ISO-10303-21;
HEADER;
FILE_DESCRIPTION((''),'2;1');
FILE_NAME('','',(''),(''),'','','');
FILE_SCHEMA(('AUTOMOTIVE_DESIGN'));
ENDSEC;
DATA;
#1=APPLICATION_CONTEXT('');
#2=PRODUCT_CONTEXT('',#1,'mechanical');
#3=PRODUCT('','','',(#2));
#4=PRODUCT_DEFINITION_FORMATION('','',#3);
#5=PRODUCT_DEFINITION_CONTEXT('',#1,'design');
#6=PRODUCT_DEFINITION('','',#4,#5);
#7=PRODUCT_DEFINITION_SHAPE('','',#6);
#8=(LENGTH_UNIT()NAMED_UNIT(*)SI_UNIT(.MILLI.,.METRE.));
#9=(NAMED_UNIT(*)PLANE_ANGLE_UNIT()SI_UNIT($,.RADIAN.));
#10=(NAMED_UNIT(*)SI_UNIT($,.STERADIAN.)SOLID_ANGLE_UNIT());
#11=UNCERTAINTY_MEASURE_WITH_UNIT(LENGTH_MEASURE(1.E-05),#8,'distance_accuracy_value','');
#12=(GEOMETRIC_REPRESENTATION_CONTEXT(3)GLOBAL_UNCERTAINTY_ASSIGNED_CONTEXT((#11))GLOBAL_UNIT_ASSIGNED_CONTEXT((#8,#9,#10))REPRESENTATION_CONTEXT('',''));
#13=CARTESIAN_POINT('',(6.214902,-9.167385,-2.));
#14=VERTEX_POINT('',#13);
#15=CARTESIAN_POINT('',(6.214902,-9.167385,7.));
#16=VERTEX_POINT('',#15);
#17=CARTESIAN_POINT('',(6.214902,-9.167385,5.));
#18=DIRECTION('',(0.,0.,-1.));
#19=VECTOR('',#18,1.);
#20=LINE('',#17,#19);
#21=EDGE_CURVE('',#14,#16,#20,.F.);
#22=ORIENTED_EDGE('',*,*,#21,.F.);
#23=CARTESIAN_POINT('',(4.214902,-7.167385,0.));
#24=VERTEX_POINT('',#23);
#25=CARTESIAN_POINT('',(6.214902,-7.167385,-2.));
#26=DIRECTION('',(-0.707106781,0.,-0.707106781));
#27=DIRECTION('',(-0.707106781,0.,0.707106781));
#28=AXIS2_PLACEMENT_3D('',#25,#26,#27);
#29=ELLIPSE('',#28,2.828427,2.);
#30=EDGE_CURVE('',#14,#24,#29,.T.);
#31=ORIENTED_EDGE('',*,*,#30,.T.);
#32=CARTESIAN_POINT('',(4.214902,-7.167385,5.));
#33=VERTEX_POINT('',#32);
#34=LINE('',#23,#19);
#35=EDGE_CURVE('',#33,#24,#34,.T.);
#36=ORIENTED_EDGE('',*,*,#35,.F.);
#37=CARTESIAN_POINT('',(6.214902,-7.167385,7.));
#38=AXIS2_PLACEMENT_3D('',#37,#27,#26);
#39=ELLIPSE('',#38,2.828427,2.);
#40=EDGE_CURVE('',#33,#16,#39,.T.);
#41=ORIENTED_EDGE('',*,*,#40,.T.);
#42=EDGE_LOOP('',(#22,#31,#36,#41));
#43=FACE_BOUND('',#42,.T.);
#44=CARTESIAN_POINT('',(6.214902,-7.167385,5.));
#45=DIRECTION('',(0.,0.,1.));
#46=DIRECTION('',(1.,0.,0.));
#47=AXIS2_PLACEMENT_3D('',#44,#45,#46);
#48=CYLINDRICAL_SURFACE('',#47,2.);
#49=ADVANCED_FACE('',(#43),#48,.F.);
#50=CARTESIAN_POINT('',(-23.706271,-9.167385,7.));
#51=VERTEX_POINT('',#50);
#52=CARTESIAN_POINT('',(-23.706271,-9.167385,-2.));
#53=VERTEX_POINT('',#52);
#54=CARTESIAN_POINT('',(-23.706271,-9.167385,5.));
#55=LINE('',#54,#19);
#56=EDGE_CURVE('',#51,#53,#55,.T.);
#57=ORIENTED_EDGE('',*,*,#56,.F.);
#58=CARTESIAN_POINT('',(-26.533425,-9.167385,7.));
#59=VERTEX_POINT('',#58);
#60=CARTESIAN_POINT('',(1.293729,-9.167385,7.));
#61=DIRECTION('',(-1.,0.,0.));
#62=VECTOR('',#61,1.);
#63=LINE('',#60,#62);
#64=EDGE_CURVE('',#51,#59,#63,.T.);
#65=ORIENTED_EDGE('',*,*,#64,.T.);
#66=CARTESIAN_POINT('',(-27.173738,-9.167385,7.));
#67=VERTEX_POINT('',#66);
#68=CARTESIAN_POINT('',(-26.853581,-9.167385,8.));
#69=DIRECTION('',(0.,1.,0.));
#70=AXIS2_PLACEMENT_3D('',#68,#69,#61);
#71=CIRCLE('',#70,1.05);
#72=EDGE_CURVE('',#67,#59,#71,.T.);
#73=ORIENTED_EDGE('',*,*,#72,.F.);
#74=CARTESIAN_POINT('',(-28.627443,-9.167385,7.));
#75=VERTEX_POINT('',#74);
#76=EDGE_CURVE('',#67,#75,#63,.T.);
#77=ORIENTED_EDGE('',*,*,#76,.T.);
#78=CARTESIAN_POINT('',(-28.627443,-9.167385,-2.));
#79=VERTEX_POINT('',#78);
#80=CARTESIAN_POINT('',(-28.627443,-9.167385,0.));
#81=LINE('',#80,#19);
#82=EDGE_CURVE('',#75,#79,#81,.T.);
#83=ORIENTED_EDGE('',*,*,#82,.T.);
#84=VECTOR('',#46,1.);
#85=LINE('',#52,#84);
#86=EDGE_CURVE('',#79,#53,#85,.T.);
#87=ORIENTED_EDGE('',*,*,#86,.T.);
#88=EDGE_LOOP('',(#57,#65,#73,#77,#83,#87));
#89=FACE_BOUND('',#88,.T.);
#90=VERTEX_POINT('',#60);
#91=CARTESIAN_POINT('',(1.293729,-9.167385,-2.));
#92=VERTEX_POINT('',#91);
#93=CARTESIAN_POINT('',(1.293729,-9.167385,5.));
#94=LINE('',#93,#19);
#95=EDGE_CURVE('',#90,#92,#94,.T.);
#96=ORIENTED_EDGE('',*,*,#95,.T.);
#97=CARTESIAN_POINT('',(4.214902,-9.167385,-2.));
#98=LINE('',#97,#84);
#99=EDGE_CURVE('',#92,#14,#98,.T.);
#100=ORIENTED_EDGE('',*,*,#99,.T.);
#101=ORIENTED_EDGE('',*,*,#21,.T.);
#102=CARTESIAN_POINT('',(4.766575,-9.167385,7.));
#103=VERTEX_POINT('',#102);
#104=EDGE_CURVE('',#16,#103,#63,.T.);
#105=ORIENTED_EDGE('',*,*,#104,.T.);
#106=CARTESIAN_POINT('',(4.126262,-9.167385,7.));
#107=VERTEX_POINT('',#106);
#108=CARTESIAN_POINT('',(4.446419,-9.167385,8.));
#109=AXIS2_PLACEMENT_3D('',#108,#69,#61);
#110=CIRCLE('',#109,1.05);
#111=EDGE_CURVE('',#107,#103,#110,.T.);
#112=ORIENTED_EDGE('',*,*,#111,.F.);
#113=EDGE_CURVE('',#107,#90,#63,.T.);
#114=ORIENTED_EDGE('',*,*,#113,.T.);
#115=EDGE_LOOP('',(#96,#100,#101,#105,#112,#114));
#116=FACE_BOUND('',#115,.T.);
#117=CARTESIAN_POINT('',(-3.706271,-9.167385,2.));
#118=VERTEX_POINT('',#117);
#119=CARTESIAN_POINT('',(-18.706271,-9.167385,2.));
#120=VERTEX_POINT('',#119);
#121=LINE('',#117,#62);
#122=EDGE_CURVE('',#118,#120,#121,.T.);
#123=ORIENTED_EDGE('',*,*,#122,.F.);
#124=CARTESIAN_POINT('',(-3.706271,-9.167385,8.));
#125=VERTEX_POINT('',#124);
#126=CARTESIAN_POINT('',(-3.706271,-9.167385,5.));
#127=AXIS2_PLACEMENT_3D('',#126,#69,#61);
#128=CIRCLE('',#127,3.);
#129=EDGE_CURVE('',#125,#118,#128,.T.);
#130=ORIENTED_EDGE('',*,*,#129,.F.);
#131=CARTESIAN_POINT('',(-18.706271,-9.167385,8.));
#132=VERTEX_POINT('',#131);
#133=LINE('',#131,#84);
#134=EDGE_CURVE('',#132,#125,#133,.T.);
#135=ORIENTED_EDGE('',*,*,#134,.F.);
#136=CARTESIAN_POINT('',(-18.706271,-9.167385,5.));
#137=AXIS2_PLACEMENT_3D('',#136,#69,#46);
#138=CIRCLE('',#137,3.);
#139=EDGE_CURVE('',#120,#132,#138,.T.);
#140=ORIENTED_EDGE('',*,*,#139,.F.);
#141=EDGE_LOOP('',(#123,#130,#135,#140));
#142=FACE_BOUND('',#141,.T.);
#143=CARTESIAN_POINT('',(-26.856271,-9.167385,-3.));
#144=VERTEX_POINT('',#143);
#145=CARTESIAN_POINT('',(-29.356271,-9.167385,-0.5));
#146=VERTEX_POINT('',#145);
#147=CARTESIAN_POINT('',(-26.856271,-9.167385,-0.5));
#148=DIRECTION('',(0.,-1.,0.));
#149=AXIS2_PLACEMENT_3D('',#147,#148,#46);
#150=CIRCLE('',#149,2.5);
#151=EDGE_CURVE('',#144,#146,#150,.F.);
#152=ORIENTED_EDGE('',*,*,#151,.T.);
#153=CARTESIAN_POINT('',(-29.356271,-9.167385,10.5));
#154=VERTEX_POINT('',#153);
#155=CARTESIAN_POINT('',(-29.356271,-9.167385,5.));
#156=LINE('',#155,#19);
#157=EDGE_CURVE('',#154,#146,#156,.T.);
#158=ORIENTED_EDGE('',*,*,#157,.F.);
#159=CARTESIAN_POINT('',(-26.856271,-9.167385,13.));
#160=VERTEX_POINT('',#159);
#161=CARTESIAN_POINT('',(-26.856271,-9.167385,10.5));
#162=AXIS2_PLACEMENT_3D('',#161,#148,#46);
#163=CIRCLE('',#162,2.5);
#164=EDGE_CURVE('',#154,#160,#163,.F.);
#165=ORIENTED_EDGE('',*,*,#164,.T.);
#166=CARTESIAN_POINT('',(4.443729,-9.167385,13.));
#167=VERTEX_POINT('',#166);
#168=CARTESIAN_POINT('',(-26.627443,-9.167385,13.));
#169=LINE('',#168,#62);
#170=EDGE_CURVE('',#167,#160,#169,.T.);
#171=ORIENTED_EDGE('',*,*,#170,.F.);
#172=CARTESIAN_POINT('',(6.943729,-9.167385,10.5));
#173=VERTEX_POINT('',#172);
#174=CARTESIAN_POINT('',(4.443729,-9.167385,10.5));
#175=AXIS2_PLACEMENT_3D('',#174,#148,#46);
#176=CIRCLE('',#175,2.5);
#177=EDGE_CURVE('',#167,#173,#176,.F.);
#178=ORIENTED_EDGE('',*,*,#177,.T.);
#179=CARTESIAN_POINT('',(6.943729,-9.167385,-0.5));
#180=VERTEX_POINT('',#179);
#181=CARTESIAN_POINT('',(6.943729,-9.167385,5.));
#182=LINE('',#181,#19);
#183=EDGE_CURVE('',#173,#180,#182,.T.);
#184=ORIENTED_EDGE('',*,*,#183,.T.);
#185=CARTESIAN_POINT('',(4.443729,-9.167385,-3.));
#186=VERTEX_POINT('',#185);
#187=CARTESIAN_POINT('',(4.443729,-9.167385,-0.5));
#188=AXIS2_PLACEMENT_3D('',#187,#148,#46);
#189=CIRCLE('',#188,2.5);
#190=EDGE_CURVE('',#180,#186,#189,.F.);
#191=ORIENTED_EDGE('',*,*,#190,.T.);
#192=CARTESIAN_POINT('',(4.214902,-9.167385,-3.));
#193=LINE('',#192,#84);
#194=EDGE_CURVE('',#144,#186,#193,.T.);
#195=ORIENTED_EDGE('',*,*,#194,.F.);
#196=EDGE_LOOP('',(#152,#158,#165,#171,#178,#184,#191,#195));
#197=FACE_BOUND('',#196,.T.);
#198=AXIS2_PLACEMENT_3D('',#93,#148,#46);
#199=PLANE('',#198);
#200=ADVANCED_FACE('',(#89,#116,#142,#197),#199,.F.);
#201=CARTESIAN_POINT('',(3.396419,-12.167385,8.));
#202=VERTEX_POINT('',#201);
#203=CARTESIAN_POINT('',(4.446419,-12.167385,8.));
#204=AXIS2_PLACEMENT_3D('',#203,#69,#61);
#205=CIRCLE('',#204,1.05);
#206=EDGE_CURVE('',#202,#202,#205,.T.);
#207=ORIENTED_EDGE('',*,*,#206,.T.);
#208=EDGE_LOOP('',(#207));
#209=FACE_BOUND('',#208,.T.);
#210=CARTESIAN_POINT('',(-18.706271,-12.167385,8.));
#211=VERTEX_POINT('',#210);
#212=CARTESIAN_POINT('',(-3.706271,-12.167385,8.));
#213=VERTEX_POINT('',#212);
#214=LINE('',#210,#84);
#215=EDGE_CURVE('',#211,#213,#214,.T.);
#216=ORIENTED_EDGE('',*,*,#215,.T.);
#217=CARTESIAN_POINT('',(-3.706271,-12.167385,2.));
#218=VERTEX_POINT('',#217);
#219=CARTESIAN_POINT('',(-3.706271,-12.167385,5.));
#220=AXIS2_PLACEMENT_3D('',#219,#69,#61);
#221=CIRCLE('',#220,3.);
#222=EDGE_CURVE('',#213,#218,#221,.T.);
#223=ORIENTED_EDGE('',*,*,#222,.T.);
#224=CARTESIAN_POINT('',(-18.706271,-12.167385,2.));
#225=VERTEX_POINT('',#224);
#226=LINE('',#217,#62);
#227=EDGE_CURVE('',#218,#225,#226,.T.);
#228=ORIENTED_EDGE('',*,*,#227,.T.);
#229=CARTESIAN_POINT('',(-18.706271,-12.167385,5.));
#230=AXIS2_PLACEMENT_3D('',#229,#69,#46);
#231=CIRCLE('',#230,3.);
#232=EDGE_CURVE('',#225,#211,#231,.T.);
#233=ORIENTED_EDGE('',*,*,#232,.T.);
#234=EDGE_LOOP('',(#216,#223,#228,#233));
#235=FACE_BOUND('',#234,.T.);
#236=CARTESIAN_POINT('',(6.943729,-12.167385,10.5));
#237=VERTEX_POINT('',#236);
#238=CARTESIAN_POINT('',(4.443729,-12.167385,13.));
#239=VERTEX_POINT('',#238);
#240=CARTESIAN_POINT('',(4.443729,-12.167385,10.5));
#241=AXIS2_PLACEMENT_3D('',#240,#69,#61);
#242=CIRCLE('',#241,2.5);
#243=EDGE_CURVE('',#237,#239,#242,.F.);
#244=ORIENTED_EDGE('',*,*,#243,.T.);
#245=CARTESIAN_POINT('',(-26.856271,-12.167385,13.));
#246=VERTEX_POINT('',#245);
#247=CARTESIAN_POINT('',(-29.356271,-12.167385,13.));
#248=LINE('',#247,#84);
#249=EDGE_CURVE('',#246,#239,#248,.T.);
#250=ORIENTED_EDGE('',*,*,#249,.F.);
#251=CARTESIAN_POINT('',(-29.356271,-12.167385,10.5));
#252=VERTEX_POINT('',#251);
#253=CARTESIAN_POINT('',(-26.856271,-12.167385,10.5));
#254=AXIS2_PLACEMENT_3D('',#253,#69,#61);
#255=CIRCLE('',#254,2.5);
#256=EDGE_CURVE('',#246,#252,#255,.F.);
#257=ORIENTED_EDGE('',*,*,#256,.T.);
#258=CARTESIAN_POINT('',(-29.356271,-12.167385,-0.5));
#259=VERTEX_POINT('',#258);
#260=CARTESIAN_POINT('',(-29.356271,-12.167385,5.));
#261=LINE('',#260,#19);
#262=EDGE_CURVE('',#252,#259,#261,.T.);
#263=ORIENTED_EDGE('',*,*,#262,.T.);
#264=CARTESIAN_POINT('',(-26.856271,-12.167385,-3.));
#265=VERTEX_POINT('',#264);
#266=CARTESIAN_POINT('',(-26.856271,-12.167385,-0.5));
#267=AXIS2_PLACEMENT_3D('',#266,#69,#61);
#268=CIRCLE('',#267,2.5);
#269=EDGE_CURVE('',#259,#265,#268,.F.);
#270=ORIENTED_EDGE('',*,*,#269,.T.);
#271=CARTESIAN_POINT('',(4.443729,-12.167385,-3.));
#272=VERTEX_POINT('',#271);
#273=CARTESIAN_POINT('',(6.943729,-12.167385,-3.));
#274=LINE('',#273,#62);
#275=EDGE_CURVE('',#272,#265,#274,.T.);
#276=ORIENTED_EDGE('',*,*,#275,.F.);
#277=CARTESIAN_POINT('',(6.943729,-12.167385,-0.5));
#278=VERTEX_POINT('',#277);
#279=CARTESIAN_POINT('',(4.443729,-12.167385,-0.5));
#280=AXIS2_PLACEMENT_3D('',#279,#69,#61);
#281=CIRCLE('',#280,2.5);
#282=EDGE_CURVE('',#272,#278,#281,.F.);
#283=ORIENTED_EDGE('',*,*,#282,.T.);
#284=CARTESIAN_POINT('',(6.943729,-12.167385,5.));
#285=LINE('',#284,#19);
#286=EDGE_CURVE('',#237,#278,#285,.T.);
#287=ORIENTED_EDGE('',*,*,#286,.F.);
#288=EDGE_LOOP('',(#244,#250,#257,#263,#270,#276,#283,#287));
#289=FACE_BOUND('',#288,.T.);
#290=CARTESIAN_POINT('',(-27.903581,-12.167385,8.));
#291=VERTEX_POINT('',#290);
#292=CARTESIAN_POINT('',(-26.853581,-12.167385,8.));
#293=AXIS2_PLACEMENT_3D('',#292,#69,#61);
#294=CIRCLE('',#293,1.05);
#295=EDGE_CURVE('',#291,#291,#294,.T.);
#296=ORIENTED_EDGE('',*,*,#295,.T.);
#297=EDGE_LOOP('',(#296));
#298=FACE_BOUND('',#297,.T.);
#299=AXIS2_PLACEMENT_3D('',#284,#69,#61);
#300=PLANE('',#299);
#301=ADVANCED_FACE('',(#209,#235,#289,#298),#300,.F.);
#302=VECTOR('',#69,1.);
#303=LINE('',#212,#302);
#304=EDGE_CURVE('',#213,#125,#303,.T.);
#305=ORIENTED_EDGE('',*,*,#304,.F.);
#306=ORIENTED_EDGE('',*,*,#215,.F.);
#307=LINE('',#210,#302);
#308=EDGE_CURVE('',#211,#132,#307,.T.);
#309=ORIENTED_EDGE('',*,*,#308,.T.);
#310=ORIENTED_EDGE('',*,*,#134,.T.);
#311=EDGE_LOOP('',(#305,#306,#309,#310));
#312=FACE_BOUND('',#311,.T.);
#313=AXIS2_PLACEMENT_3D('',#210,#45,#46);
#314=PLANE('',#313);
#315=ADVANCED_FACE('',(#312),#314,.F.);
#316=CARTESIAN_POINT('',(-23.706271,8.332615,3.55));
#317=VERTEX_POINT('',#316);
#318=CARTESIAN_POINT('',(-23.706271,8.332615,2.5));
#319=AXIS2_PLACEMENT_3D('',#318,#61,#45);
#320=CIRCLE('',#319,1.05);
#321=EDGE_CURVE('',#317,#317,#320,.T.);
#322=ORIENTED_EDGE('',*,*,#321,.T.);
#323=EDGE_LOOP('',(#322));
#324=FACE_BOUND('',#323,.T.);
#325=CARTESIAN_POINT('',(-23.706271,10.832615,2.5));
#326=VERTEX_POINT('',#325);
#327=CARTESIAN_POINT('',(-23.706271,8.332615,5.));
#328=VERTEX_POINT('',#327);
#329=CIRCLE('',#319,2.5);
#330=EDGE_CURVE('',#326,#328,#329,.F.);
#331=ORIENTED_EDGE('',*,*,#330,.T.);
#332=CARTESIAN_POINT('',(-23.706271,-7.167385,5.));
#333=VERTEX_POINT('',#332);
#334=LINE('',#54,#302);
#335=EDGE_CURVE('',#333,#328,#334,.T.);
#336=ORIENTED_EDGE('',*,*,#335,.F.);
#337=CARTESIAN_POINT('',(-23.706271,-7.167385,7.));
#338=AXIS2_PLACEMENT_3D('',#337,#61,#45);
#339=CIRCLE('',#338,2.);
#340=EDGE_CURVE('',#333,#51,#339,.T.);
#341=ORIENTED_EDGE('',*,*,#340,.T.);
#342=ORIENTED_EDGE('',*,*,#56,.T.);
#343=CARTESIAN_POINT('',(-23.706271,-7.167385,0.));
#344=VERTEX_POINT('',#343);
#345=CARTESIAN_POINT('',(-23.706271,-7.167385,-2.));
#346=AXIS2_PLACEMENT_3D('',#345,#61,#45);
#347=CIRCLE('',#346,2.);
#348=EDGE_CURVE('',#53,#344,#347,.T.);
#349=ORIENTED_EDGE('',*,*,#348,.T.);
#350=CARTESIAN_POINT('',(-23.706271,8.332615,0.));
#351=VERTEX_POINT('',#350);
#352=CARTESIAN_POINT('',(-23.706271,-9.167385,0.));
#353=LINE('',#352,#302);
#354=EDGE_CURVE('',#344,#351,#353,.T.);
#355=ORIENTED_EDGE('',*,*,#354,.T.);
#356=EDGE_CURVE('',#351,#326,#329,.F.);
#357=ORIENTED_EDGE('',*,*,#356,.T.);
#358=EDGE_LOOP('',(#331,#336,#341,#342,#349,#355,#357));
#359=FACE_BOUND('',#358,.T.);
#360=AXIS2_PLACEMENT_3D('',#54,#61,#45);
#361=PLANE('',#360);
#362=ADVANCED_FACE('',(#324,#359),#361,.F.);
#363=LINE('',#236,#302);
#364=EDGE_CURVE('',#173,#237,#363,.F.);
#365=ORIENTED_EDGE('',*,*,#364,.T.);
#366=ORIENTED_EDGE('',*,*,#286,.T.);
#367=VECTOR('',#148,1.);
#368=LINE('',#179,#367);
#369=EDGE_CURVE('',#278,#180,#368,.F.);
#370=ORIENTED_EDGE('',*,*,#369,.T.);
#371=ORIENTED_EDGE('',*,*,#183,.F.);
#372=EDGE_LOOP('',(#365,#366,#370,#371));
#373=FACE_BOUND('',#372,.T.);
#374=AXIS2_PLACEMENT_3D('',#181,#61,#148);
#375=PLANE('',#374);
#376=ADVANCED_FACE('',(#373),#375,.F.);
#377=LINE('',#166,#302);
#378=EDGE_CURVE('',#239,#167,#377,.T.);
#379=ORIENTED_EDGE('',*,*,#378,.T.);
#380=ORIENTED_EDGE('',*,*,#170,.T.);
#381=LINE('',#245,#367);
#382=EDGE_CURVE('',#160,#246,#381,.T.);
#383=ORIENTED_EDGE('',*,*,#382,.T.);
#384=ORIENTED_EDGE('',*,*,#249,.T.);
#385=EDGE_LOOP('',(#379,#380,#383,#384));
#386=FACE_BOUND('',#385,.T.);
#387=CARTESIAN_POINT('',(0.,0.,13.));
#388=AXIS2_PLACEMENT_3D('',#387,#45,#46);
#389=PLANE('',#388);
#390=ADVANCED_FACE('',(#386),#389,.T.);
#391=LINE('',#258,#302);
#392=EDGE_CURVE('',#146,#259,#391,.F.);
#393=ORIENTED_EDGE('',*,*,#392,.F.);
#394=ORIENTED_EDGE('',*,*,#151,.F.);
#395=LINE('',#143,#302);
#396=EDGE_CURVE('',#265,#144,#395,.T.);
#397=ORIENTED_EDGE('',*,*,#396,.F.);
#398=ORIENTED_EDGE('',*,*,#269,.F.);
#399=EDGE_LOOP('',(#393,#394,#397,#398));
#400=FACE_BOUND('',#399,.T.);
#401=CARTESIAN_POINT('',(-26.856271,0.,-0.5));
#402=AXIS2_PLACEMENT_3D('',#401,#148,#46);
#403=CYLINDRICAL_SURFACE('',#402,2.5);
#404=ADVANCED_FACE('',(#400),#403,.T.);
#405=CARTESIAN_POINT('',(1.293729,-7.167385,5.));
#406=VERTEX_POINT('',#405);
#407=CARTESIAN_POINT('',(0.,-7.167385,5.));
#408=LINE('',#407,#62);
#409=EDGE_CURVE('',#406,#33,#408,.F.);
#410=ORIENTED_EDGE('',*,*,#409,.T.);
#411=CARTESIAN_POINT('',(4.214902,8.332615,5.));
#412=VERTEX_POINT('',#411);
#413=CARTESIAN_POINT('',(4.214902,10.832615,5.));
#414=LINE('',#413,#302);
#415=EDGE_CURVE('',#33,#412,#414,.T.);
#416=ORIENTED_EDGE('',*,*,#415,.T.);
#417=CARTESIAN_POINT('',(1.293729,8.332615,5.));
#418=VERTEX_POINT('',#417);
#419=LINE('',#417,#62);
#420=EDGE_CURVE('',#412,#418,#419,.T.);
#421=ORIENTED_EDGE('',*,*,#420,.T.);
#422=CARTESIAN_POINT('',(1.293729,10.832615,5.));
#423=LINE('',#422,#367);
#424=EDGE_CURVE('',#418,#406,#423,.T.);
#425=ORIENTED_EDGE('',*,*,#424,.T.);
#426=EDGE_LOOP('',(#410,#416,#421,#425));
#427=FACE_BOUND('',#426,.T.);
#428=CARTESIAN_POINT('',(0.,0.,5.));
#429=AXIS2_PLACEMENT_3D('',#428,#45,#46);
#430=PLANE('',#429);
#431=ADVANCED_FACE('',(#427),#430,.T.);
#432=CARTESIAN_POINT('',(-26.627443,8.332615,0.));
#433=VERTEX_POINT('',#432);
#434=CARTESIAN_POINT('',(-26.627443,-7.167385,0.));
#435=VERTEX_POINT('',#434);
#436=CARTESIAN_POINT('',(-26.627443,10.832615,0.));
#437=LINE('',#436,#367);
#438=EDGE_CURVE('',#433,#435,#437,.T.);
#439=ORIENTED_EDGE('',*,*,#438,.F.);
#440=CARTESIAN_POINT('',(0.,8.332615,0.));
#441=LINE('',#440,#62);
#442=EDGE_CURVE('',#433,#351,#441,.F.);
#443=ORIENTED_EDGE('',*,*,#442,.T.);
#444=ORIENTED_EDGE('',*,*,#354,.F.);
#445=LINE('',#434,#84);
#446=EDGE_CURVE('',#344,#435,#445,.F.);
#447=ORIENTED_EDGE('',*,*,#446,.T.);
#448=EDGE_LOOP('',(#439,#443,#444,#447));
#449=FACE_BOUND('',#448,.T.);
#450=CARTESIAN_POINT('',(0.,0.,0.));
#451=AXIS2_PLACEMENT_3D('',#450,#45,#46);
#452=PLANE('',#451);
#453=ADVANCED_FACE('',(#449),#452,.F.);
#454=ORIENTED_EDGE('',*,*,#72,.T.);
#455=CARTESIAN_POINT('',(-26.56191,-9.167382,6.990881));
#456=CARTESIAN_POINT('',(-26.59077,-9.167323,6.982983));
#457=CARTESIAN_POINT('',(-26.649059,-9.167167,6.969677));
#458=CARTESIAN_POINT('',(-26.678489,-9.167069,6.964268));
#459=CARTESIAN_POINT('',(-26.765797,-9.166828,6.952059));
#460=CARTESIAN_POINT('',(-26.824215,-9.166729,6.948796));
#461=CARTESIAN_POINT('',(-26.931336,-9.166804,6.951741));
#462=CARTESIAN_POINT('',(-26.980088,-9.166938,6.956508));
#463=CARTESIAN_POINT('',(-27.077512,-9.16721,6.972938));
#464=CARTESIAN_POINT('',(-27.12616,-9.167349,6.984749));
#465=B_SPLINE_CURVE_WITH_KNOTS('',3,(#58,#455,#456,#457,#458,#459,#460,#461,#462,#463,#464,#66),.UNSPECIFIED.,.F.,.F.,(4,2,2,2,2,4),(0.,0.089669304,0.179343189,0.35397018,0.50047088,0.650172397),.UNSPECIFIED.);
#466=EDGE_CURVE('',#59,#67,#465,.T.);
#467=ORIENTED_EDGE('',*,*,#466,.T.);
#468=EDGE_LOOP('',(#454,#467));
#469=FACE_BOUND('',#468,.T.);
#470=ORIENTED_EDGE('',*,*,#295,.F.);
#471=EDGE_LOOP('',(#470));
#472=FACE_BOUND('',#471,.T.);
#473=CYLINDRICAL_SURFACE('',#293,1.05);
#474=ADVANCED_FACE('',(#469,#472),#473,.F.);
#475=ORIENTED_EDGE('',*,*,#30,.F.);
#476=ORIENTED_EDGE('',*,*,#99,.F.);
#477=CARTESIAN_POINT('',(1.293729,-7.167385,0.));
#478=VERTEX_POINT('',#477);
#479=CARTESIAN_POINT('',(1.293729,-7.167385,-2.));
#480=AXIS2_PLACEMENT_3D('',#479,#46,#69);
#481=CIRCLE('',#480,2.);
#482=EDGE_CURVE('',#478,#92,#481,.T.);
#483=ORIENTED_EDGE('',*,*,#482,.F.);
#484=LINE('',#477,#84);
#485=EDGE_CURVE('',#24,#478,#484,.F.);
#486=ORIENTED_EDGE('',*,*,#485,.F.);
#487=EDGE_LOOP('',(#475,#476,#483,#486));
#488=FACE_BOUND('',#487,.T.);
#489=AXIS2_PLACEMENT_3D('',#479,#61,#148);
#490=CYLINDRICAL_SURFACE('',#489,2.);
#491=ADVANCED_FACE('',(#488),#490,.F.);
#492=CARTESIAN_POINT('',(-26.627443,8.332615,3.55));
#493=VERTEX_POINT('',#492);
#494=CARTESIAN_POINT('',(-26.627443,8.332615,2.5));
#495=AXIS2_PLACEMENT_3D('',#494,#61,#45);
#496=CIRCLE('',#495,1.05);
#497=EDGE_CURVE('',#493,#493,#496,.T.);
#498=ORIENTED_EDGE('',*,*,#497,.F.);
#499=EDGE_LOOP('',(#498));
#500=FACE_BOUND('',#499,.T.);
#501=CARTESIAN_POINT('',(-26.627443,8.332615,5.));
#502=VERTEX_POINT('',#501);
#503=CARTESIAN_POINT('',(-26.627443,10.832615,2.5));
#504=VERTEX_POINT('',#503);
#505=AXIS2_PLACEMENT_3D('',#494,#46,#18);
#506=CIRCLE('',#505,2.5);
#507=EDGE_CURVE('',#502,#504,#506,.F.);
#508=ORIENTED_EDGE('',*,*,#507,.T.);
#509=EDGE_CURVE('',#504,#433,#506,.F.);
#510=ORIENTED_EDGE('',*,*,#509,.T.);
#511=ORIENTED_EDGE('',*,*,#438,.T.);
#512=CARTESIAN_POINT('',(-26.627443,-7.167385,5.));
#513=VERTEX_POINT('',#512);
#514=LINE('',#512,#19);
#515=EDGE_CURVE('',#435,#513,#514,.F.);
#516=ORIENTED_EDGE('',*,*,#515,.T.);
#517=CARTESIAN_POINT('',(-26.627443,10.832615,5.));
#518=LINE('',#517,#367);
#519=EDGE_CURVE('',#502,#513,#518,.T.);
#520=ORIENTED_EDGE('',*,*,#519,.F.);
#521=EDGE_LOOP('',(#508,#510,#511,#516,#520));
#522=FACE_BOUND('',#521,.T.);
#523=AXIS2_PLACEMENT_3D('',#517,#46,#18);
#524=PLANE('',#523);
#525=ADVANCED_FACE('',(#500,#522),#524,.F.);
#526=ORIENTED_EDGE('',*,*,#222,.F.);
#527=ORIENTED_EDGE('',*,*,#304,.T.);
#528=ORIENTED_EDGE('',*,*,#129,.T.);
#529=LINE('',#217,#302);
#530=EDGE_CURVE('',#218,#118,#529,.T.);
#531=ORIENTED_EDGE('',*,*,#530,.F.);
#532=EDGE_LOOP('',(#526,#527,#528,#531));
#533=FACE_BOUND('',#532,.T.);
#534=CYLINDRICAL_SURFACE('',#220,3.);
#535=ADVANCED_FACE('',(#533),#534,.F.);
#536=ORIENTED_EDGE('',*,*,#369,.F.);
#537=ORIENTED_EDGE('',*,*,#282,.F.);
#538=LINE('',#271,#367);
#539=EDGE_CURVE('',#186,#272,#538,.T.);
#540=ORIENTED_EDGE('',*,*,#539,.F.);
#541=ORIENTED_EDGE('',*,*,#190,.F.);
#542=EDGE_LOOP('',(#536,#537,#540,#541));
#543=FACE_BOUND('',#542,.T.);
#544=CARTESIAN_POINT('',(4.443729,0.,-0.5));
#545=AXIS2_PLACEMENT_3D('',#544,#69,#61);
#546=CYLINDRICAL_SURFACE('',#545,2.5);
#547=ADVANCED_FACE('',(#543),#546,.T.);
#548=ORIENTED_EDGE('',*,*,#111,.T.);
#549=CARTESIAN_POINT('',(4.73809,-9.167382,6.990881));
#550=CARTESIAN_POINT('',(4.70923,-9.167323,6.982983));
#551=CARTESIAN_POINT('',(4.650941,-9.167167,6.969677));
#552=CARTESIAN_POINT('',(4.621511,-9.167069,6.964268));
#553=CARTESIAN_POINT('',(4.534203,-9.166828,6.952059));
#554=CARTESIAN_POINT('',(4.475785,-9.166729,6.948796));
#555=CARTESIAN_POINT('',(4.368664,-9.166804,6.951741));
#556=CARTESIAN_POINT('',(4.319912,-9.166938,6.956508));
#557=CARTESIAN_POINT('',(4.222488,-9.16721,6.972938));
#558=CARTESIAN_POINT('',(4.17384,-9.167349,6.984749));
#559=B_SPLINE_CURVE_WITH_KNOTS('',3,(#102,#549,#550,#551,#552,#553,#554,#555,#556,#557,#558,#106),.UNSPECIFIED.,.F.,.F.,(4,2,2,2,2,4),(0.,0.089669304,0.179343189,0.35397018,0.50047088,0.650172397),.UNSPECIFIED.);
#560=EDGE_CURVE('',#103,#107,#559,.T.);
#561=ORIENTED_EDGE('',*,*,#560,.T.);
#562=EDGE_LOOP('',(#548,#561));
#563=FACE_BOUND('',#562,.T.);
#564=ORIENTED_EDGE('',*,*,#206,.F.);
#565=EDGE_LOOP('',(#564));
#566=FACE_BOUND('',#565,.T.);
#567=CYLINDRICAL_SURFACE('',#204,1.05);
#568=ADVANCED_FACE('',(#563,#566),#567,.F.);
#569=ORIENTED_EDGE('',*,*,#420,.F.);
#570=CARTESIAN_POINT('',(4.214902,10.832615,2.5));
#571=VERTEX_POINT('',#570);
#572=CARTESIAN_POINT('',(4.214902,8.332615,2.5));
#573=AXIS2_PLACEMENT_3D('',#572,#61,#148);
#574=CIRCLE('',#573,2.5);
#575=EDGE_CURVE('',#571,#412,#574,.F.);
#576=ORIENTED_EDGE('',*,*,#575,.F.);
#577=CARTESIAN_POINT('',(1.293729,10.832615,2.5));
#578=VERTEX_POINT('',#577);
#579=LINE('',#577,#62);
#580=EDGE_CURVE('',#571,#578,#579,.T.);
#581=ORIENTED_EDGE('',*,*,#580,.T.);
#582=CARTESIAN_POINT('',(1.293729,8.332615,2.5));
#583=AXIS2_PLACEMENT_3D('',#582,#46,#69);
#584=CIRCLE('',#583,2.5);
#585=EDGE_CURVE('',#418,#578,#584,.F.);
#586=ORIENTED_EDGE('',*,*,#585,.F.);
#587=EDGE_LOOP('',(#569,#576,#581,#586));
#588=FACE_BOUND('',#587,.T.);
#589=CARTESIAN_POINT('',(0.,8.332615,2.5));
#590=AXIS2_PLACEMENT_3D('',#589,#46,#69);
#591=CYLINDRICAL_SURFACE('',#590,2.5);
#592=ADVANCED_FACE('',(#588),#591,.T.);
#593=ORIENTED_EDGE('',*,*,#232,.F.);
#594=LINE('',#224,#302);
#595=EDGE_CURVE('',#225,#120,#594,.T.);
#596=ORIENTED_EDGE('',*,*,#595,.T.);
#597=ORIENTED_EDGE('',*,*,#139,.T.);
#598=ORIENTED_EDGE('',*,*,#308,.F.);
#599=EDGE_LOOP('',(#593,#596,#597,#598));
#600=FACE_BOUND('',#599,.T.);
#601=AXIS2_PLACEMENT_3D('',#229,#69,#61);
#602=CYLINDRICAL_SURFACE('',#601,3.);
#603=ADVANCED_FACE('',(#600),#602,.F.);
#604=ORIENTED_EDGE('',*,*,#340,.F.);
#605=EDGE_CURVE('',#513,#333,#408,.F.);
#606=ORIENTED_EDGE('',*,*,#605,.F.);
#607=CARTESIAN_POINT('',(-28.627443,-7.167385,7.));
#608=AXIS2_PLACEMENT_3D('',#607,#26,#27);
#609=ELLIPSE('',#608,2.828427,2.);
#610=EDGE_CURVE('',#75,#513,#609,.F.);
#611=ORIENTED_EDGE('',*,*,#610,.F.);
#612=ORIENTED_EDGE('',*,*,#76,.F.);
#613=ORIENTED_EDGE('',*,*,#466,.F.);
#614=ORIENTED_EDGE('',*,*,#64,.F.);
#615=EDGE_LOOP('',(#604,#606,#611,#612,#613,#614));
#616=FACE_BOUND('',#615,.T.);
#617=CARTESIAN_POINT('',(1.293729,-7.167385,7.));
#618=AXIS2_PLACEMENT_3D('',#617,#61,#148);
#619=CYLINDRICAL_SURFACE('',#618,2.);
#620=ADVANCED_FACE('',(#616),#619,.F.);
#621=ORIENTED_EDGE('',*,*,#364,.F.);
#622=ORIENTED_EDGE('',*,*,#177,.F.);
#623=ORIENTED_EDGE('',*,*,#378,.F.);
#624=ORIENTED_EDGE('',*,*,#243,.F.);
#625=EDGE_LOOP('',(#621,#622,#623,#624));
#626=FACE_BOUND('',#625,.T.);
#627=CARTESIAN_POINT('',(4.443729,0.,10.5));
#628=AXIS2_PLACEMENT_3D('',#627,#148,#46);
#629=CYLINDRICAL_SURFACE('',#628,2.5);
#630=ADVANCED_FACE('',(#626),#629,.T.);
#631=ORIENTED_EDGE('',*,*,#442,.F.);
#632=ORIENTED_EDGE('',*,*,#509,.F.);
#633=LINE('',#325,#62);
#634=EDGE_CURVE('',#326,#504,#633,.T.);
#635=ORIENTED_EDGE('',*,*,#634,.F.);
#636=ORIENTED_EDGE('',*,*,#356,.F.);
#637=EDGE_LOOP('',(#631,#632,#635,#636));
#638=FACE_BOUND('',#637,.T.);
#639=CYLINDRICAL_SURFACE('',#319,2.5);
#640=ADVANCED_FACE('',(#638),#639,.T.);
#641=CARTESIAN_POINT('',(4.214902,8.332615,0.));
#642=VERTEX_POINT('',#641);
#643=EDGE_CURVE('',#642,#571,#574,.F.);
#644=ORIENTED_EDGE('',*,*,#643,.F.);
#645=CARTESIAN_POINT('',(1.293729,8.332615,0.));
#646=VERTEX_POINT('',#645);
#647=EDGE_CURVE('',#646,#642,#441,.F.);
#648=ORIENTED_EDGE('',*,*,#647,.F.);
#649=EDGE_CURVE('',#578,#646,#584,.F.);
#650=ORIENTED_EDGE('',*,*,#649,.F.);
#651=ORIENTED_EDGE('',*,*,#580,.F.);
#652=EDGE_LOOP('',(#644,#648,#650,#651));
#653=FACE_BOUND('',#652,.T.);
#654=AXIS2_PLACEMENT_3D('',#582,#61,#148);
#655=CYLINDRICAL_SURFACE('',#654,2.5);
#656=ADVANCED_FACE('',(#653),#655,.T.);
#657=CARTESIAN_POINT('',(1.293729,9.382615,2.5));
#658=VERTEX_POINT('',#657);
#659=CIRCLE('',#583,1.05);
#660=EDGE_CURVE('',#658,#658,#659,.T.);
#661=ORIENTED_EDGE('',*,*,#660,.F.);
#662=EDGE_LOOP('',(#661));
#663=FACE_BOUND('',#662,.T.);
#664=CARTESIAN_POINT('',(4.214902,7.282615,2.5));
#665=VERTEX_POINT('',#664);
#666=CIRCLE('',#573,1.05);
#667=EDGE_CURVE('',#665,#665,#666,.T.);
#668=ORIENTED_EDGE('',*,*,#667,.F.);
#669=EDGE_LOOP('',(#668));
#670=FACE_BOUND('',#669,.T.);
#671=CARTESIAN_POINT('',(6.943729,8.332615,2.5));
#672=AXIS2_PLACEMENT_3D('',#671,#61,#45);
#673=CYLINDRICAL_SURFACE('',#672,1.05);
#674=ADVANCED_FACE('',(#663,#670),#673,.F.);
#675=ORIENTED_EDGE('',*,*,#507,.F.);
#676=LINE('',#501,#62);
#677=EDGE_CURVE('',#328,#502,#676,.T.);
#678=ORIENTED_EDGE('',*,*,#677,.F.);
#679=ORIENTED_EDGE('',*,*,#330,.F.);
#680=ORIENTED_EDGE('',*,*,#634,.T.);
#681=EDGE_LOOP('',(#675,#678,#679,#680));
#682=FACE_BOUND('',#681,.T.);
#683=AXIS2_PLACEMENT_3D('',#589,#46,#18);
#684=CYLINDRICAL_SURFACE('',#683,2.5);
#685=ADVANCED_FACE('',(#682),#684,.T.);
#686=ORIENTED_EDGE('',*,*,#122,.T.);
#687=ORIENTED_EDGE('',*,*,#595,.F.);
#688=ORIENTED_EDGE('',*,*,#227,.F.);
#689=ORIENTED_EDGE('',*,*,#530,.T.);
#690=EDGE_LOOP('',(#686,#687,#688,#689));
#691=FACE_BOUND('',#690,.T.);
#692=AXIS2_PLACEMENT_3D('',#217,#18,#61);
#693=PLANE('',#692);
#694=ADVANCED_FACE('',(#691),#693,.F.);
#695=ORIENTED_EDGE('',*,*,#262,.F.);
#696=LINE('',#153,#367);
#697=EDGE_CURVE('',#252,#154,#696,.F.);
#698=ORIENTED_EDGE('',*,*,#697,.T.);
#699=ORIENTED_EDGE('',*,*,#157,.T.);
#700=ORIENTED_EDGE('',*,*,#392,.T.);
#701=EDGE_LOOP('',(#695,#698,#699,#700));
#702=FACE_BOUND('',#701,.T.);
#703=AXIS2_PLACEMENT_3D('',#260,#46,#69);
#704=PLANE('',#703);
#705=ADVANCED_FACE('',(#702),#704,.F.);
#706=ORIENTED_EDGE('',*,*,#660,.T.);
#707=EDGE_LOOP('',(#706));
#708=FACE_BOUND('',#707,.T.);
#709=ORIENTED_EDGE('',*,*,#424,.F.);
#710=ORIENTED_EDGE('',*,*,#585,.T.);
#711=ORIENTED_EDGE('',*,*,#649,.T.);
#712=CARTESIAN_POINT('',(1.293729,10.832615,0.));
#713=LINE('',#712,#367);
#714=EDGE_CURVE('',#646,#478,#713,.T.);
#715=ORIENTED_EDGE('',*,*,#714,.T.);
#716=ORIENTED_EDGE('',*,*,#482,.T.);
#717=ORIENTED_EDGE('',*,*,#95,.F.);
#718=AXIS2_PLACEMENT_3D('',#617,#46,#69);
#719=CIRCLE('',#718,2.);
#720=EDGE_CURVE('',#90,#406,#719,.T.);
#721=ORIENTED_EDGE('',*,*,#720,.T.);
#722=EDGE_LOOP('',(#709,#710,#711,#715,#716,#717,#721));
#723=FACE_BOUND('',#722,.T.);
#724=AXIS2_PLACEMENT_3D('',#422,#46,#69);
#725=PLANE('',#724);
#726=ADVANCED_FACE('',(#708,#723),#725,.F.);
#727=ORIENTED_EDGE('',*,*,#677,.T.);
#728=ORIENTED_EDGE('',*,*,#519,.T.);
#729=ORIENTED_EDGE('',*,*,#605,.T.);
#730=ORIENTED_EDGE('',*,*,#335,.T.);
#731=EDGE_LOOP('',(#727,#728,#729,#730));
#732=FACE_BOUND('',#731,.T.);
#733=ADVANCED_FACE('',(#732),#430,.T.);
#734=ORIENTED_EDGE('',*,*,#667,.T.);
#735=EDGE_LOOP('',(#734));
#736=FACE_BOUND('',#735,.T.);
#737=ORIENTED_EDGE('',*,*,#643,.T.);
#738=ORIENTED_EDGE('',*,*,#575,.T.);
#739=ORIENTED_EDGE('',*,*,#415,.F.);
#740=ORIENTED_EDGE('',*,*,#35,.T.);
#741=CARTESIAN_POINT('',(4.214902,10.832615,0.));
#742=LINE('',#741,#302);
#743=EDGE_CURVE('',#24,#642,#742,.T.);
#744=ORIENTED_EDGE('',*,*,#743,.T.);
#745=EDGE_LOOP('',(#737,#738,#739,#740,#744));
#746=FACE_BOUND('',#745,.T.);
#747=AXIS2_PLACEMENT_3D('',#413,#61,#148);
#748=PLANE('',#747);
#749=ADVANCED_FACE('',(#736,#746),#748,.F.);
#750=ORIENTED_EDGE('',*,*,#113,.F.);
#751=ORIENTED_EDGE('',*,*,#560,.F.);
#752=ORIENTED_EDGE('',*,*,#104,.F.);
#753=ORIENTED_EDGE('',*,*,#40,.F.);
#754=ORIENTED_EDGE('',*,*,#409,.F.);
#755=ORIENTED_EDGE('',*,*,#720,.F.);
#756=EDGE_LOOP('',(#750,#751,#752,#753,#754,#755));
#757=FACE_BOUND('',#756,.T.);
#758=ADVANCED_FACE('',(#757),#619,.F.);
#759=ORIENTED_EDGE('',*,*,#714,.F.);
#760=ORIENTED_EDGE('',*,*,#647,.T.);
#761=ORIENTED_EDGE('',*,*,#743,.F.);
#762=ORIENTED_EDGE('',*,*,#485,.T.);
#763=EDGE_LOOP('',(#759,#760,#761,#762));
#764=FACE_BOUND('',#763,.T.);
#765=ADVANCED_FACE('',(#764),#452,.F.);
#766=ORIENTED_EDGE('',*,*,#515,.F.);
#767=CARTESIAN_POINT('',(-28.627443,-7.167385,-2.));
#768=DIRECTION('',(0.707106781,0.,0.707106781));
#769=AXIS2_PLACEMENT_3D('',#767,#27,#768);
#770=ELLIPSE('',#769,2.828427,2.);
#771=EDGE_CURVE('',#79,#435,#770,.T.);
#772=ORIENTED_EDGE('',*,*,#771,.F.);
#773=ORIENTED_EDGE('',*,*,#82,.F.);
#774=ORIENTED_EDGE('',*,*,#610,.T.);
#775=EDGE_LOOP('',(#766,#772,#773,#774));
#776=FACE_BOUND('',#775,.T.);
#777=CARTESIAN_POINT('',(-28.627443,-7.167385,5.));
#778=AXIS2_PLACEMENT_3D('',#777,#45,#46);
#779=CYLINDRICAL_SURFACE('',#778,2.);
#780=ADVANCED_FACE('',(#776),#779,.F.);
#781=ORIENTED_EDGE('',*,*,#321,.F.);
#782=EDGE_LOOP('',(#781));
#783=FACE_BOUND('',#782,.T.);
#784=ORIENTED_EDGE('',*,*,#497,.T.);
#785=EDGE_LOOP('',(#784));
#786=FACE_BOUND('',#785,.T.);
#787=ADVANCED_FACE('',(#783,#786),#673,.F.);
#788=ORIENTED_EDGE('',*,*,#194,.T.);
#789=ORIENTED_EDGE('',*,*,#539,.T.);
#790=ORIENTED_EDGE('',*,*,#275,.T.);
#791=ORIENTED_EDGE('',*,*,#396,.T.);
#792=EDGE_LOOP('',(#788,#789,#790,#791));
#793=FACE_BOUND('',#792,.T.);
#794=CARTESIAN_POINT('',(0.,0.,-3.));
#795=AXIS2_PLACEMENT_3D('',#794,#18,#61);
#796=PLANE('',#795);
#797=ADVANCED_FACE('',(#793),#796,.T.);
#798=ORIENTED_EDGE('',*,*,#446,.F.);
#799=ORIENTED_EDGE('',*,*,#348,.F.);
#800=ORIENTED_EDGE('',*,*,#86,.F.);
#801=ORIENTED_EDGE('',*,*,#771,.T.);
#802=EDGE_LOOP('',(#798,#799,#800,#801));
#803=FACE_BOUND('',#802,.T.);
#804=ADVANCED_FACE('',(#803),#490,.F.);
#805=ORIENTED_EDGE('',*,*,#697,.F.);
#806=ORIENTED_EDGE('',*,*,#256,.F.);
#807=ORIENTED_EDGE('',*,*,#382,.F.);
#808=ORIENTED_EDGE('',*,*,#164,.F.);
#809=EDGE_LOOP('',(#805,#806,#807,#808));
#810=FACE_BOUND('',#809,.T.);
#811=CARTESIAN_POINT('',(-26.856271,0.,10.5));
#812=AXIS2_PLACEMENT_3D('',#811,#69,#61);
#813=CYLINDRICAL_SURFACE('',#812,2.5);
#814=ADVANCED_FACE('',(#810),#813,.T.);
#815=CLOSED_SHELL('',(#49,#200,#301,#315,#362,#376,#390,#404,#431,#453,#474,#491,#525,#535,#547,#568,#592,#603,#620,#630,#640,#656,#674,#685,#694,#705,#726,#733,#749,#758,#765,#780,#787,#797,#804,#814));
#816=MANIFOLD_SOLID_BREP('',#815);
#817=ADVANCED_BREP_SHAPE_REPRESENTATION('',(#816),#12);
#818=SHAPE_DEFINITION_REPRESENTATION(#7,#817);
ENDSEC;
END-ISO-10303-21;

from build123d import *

# Parameters (mm, degrees)
DODANIE_WYCI_GNI_CIE1_DEPTH = 5
DODANIE_WYCI_GNI_CIE4_DEPTH = 8
DODANIE_WYCI_GNI_CIE5_DEPTH = 3
SZKIC8_R                    = 1.05
WYTNIJ_WYCI_GNI_CIE1_DEPTH  = 38.825793195
SZKIC9_R                    = 1.05
WYTNIJ_WYCI_GNI_CIE2_DEPTH  = 39.000906522
ZAOKR_GLENIE1_R             = 2.5
ZAOKR_GLENIE2_R             = 2.5
ZAOKR_GLENIE3_R             = 2
WYTNIJ_WYCI_GNI_CIE3_DEPTH  = 38.825793195


# Some blends are built 0.0001 mm under size
with BuildPart() as part:
    # Szkic1 → Dodanie-wyciągnięcie1 (new body)
    with BuildSketch(Plane.XY):
        Polygon((6.943729276, -9.167385079), (6.943729276, -12.167385079), (-29.356270724, -12.167385079), (-29.356270724, -9.167385079), (-26.62744343, -9.167385079), (-26.62744343, 10.832614921), (-23.706270724, 10.832614921), (-23.706270724, -9.167385079), (1.293729276, -9.167385079), (1.293729276, 10.832614921), (4.214901981, 10.832614921), (4.214901981, -9.167385079), align=None)
    extrude(amount=DODANIE_WYCI_GNI_CIE1_DEPTH)

    # Szkic5 → Dodanie-wyciągnięcie4 (add)
    with BuildSketch(Plane.XY.offset(5)):
        Polygon((-26.62744343, -9.167385079), (-23.706270724, -9.167385079), (1.293729276, -9.167385079), (4.214901981, -9.167385079), (6.943729276, -9.167385079), (6.943729276, -12.167385079), (-29.356270724, -12.167385079), (-29.356270724, -9.167385079), align=None)
    extrude(amount=DODANIE_WYCI_GNI_CIE4_DEPTH)

    # Szkic7 → Dodanie-wyciągnięcie5 (add)
    with BuildSketch(Plane(origin=(0, 0, 0), x_dir=(-1, 0, 0), z_dir=(0, 0, -1))):
        Polygon((-4.214901981, -9.167385079), (-1.293729276, -9.167385079), (23.706270724, -9.167385079), (26.62744343, -9.167385079), (29.356270724, -9.167385079), (29.356270724, -12.167385079), (-6.943729276, -12.167385079), (-6.943729276, -9.167385079), align=None)
    extrude(amount=DODANIE_WYCI_GNI_CIE5_DEPTH)

    # Szkic8 → Wytnij-wyciągnięcie1 (cut, through all)
    with BuildSketch(Plane(origin=(0, -9.167385079, 0), x_dir=(1, 0, 0), z_dir=(0, 1, 0))):
        with Locations(Location((4.446418634, -8, 0), (0, 0, 180))):
            Circle(SZKIC8_R)
        with Locations(Location((-26.853581366, -8, 0), (0, 0, 180))):
            Circle(SZKIC8_R)
    extrude(amount=-WYTNIJ_WYCI_GNI_CIE1_DEPTH, mode=Mode.SUBTRACT)

    # Szkic9 → Wytnij-wyciągnięcie2 (cut, through all)
    with BuildSketch(Plane.ZY.offset(26.62744343)):
        with Locations((2.5, 8.332614921)):
            Circle(SZKIC9_R)
    extrude(amount=-WYTNIJ_WYCI_GNI_CIE2_DEPTH, mode=Mode.SUBTRACT)

    # Zaokrąglenie1
    zaokr_glenie1_edges = [part.edges().sort_by_distance(p)[0] for p in [
        (-29.356270724, -10.667385079, 13),
        (6.943729276, -10.667385079, 13),
        (6.943729276, -10.667385079, -3),
        (-29.356270724, -10.667385079, -3),
    ]]
    fillet(zaokr_glenie1_edges, radius=ZAOKR_GLENIE1_R)

    # Zaokrąglenie2
    zaokr_glenie2_edges = [part.edges().sort_by_distance(p)[0] for p in [
        (-25.166857077, 10.832614921, 5),
        (-25.166857077, 10.832614921, 0),
        (2.754315628, 10.832614921, 5),
        (2.754315628, 10.832614921, 0),
    ]]
    fillet(zaokr_glenie2_edges, radius=ZAOKR_GLENIE2_R - 0.0001)  # a hair under: the kernel refuses the full size

    # Zaokrąglenie3
    # the kernel refuses this fillet: 2 mm, written as the material it adds along each edge
    with BuildSketch(Plane(origin=(4.214901981, -9.167385079, 0), x_dir=(1, 0, 0), z_dir=(0, 0, 1))) as zaokr_glenie3_piece_1:
        with BuildLine():
            CenterArc((ZAOKR_GLENIE3_R, ZAOKR_GLENIE3_R), ZAOKR_GLENIE3_R, 180, 90)
            Line((0, ZAOKR_GLENIE3_R), (0, 0))
            Line((0, 0), (ZAOKR_GLENIE3_R, 0))
        make_face()
    extrude(amount=5)
    with BuildSketch(Plane(origin=(-26.62744343, -9.167385079, 0), x_dir=(-1, 0, 0), z_dir=(0, 0, 1))) as zaokr_glenie3_piece_2:
        with BuildLine():
            CenterArc((ZAOKR_GLENIE3_R, -ZAOKR_GLENIE3_R), ZAOKR_GLENIE3_R, 90, 90)
            Line((0, -ZAOKR_GLENIE3_R), (0, 0))
            Line((0, 0), (ZAOKR_GLENIE3_R, 0))
        make_face()
    extrude(amount=5)
    with BuildSketch(Plane(origin=(-23.706270724, -9.167385079, 5), x_dir=(0, 1, 0), z_dir=(-1, 0, 0))) as zaokr_glenie3_piece_3_section:
        with BuildLine():
            CenterArc((ZAOKR_GLENIE3_R, -ZAOKR_GLENIE3_R), ZAOKR_GLENIE3_R, 90, 90)
            Line((0, -ZAOKR_GLENIE3_R), (0, 0))
            Line((0, 0), (ZAOKR_GLENIE3_R, 0))
        make_face()
    zaokr_glenie3_piece_3 = extrude(amount=2.921172706, mode=Mode.PRIVATE)
    zaokr_glenie3_piece_3 = zaokr_glenie3_piece_3 - Plane(origin=(-26.853581366, -8.714586813, 8), x_dir=(-1, 0, 0), z_dir=(0, 1, 0)) * Cylinder(1.05, 14, mode=Mode.PRIVATE)
    add(zaokr_glenie3_piece_3)
    with BuildSketch(Plane(origin=(4.214901981, -9.167385079, 5), x_dir=(0, 0, 1), z_dir=(-1, 0, 0))) as zaokr_glenie3_piece_4_section:
        with BuildLine():
            CenterArc((ZAOKR_GLENIE3_R, ZAOKR_GLENIE3_R), ZAOKR_GLENIE3_R, 180, 90)
            Line((0, ZAOKR_GLENIE3_R), (0, 0))
            Line((0, 0), (ZAOKR_GLENIE3_R, 0))
        make_face()
    zaokr_glenie3_piece_4 = extrude(amount=2.921172706, mode=Mode.PRIVATE)
    zaokr_glenie3_piece_4 = zaokr_glenie3_piece_4 - Plane(origin=(4.446418634, -8.714587659, 8), x_dir=(-1, 0, 0), z_dir=(0, 1, 0)) * Cylinder(1.05, 14, mode=Mode.PRIVATE)
    add(zaokr_glenie3_piece_4)
    with BuildSketch(Plane(origin=(1.293729276, -9.167385079, 0), x_dir=(0, 0, -1), z_dir=(1, 0, 0))) as zaokr_glenie3_piece_5:
        with BuildLine():
            CenterArc((ZAOKR_GLENIE3_R, ZAOKR_GLENIE3_R), ZAOKR_GLENIE3_R, 180, 90)
            Line((0, ZAOKR_GLENIE3_R), (0, 0))
            Line((0, 0), (ZAOKR_GLENIE3_R, 0))
        make_face()
    extrude(amount=2.921172706)
    with BuildSketch(Plane(origin=(-26.62744343, -9.167385079, 0), x_dir=(0, 1, 0), z_dir=(1, 0, 0))) as zaokr_glenie3_piece_6:
        with BuildLine():
            CenterArc((ZAOKR_GLENIE3_R, -ZAOKR_GLENIE3_R), ZAOKR_GLENIE3_R, 90, 90)
            Line((0, -ZAOKR_GLENIE3_R), (0, 0))
            Line((0, 0), (ZAOKR_GLENIE3_R, 0))
        make_face()
    extrude(amount=2.921172706)
    with BuildSketch(Plane(origin=(4.214901981, -9.167385079, -5), x_dir=(1, 0, 0), z_dir=(0, 0, 1))) as zaokr_glenie3_piece_7a_section:
        with BuildLine():
            CenterArc((ZAOKR_GLENIE3_R, ZAOKR_GLENIE3_R), ZAOKR_GLENIE3_R, 180, 90)
            Line((0, ZAOKR_GLENIE3_R), (0, 0))
            Line((0, 0), (ZAOKR_GLENIE3_R, 0))
        make_face()
    zaokr_glenie3_piece_7a = extrude(amount=10, mode=Mode.PRIVATE)
    zaokr_glenie3_piece_7a = zaokr_glenie3_piece_7a & Plane(origin=(4.443729276, -8.70886388, -0.5), x_dir=(1, 0, 0), z_dir=(0, 1, 0)) * Cylinder(2.5, 28, mode=Mode.PRIVATE)
    zaokr_glenie3_piece_7a = split(zaokr_glenie3_piece_7a, bisect_by=Plane(origin=(4.654982767, -8.70886388, 0), z_dir=(0, 0, -1)), keep=Keep.TOP, mode=Mode.PRIVATE)
    with BuildSketch(Plane(origin=(1.293729276, -9.167385079, 0), x_dir=(0, 0, -1), z_dir=(1, 0, 0))) as zaokr_glenie3_piece_7b_section:
        with BuildLine():
            CenterArc((ZAOKR_GLENIE3_R, ZAOKR_GLENIE3_R), ZAOKR_GLENIE3_R, 180, 90)
            Line((0, ZAOKR_GLENIE3_R), (0, 0))
            Line((0, 0), (ZAOKR_GLENIE3_R, 0))
        make_face()
    zaokr_glenie3_piece_7b = extrude(amount=7.921172706, mode=Mode.PRIVATE)
    zaokr_glenie3_piece_7b = zaokr_glenie3_piece_7b & Plane(origin=(4.443729276, -8.713013539, -0.5), x_dir=(1, 0, 0), z_dir=(0, 1, 0)) * Cylinder(2.5, 24, mode=Mode.PRIVATE)
    zaokr_glenie3_piece_7b = split(zaokr_glenie3_piece_7b, bisect_by=Plane(origin=(4.214901981, -8.713013539, -0.447003407), z_dir=(1, 0, 0)), keep=Keep.TOP, mode=Mode.PRIVATE)
    zaokr_glenie3_piece_7 = zaokr_glenie3_piece_7a & zaokr_glenie3_piece_7b
    add(zaokr_glenie3_piece_7)
    with BuildSketch(Plane(origin=(4.214901981, -9.167385079, 0), x_dir=(1, 0, 0), z_dir=(0, 0, 1))) as zaokr_glenie3_piece_8a_section:
        with BuildLine():
            CenterArc((ZAOKR_GLENIE3_R, ZAOKR_GLENIE3_R), ZAOKR_GLENIE3_R, 180, 90)
            Line((0, ZAOKR_GLENIE3_R), (0, 0))
            Line((0, 0), (ZAOKR_GLENIE3_R, 0))
        make_face()
    zaokr_glenie3_piece_8a = extrude(amount=10, mode=Mode.PRIVATE)
    zaokr_glenie3_piece_8a = zaokr_glenie3_piece_8a - Plane(origin=(4.446418634, -9.113524986, 8), x_dir=(-1, 0, 0), z_dir=(0, 1, 0)) * Cylinder(1.05, 28, mode=Mode.PRIVATE)
    zaokr_glenie3_piece_8a = split(zaokr_glenie3_piece_8a, bisect_by=Plane(origin=(5.693435365, -9.113524986, 5), z_dir=(0, 0, 1)), keep=Keep.TOP, mode=Mode.PRIVATE)
    with BuildSketch(Plane(origin=(9.214901981, -9.167385079, 5), x_dir=(0, 0, 1), z_dir=(-1, 0, 0))) as zaokr_glenie3_piece_8b_section:
        with BuildLine():
            CenterArc((ZAOKR_GLENIE3_R, ZAOKR_GLENIE3_R), ZAOKR_GLENIE3_R, 180, 90)
            Line((0, ZAOKR_GLENIE3_R), (0, 0))
            Line((0, 0), (ZAOKR_GLENIE3_R, 0))
        make_face()
    zaokr_glenie3_piece_8b = extrude(amount=7.921172706, mode=Mode.PRIVATE)
    zaokr_glenie3_piece_8b = split(zaokr_glenie3_piece_8b, bisect_by=Plane(origin=(6.943729276, -8.714456285, 5.452342783), z_dir=(-1, 0, 0)), keep=Keep.TOP, mode=Mode.PRIVATE)
    zaokr_glenie3_piece_8b = zaokr_glenie3_piece_8b - Plane(origin=(4.446418634, -8.714456285, 8), x_dir=(-1, 0, 0), z_dir=(0, 1, 0)) * Cylinder(1.05, 24, mode=Mode.PRIVATE)
    zaokr_glenie3_piece_8b = split(zaokr_glenie3_piece_8b, bisect_by=Plane(origin=(4.214901981, -8.714456285, 5.452342783), z_dir=(1, 0, 0)), keep=Keep.TOP, mode=Mode.PRIVATE)
    zaokr_glenie3_piece_8 = zaokr_glenie3_piece_8a & zaokr_glenie3_piece_8b
    add(zaokr_glenie3_piece_8)
    with BuildSketch(Plane(origin=(-31.62744343, -9.167385079, 0), x_dir=(0, 1, 0), z_dir=(1, 0, 0))) as zaokr_glenie3_piece_9a_section:
        with BuildLine():
            CenterArc((ZAOKR_GLENIE3_R, -ZAOKR_GLENIE3_R), ZAOKR_GLENIE3_R, 90, 90)
            Line((0, -ZAOKR_GLENIE3_R), (0, 0))
            Line((0, 0), (ZAOKR_GLENIE3_R, 0))
        make_face()
    zaokr_glenie3_piece_9a = extrude(amount=7.921172706, mode=Mode.PRIVATE)
    zaokr_glenie3_piece_9a = split(zaokr_glenie3_piece_9a, bisect_by=Plane(origin=(-26.62744343, -8.713013524, -0.447003529), z_dir=(-1, 0, 0)), keep=Keep.TOP, mode=Mode.PRIVATE)
    zaokr_glenie3_piece_9a = zaokr_glenie3_piece_9a & Plane(origin=(-26.856270724, -8.713013524, -0.5), x_dir=(0, 0, -1), z_dir=(0, -1, 0)) * Cylinder(2.5, 24, mode=Mode.PRIVATE)
    with BuildSketch(Plane(origin=(-26.62744343, -9.167385079, -5), x_dir=(-1, 0, 0), z_dir=(0, 0, 1))) as zaokr_glenie3_piece_9b_section:
        with BuildLine():
            CenterArc((ZAOKR_GLENIE3_R, -ZAOKR_GLENIE3_R), ZAOKR_GLENIE3_R, 90, 90)
            Line((0, -ZAOKR_GLENIE3_R), (0, 0))
            Line((0, 0), (ZAOKR_GLENIE3_R, 0))
        make_face()
    zaokr_glenie3_piece_9b = extrude(amount=10, mode=Mode.PRIVATE)
    zaokr_glenie3_piece_9b = split(zaokr_glenie3_piece_9b, bisect_by=Plane(origin=(-27.067524529, -8.708863922, 0), z_dir=(0, 0, -1)), keep=Keep.TOP, mode=Mode.PRIVATE)
    zaokr_glenie3_piece_9b = zaokr_glenie3_piece_9b & Plane(origin=(-26.856270724, -8.708863922, -0.5), x_dir=(0, 0, -1), z_dir=(0, -1, 0)) * Cylinder(2.5, 29, mode=Mode.PRIVATE)
    zaokr_glenie3_piece_9 = zaokr_glenie3_piece_9a & zaokr_glenie3_piece_9b
    add(zaokr_glenie3_piece_9)
    with BuildSketch(Plane(origin=(-23.706270724, -9.167385079, 5), x_dir=(0, 1, 0), z_dir=(-1, 0, 0))) as zaokr_glenie3_piece_10a_section:
        with BuildLine():
            CenterArc((ZAOKR_GLENIE3_R, -ZAOKR_GLENIE3_R), ZAOKR_GLENIE3_R, 90, 90)
            Line((0, -ZAOKR_GLENIE3_R), (0, 0))
            Line((0, 0), (ZAOKR_GLENIE3_R, 0))
        make_face()
    zaokr_glenie3_piece_10a = extrude(amount=7.921172706, mode=Mode.PRIVATE)
    zaokr_glenie3_piece_10a = split(zaokr_glenie3_piece_10a, bisect_by=Plane(origin=(-26.62744343, -8.714457191, 5.452345725), z_dir=(-1, 0, 0)), keep=Keep.TOP, mode=Mode.PRIVATE)
    zaokr_glenie3_piece_10a = split(zaokr_glenie3_piece_10a, bisect_by=Plane(origin=(-29.356270724, -8.714457191, 5.452345725), z_dir=(1, 0, 0)), keep=Keep.TOP, mode=Mode.PRIVATE)
    zaokr_glenie3_piece_10a = zaokr_glenie3_piece_10a - Plane(origin=(-26.853581366, -8.714457191, 8), x_dir=(-1, 0, 0), z_dir=(0, 1, 0)) * Cylinder(1.05, 24, mode=Mode.PRIVATE)
    with BuildSketch(Plane(origin=(-26.62744343, -9.167385079, 0), x_dir=(-1, 0, 0), z_dir=(0, 0, 1))) as zaokr_glenie3_piece_10b_section:
        with BuildLine():
            CenterArc((ZAOKR_GLENIE3_R, -ZAOKR_GLENIE3_R), ZAOKR_GLENIE3_R, 90, 90)
            Line((0, -ZAOKR_GLENIE3_R), (0, 0))
            Line((0, 0), (ZAOKR_GLENIE3_R, 0))
        make_face()
    zaokr_glenie3_piece_10b = extrude(amount=10, mode=Mode.PRIVATE)
    zaokr_glenie3_piece_10b = split(zaokr_glenie3_piece_10b, bisect_by=Plane(origin=(-28.105975739, -9.113528996, 5), z_dir=(0, 0, 1)), keep=Keep.TOP, mode=Mode.PRIVATE)
    zaokr_glenie3_piece_10b = zaokr_glenie3_piece_10b - Plane(origin=(-26.853581366, -9.113528996, 8), x_dir=(-1, 0, 0), z_dir=(0, 1, 0)) * Cylinder(1.05, 29, mode=Mode.PRIVATE)
    zaokr_glenie3_piece_10 = zaokr_glenie3_piece_10a & zaokr_glenie3_piece_10b
    add(zaokr_glenie3_piece_10)

    # Szkic10 → Wytnij-wyciągnięcie3 (cut, through all)
    with BuildSketch(Plane(origin=(0, -9.167385079, 0), x_dir=(1, 0, 0), z_dir=(0, 1, 0))):
        with BuildLine():
            Line((-18.706270724, -8), (-3.706270724, -8))
            ThreePointArc((-3.706270724, -8), (-0.706270724, -5), (-3.706270724, -2))
            Line((-3.706270724, -2), (-18.706270724, -2))
            ThreePointArc((-18.706270724, -2), (-21.706270724, -5), (-18.706270724, -8))
        make_face()
    extrude(amount=-WYTNIJ_WYCI_GNI_CIE3_DEPTH, mode=Mode.SUBTRACT)


solid = part.part
